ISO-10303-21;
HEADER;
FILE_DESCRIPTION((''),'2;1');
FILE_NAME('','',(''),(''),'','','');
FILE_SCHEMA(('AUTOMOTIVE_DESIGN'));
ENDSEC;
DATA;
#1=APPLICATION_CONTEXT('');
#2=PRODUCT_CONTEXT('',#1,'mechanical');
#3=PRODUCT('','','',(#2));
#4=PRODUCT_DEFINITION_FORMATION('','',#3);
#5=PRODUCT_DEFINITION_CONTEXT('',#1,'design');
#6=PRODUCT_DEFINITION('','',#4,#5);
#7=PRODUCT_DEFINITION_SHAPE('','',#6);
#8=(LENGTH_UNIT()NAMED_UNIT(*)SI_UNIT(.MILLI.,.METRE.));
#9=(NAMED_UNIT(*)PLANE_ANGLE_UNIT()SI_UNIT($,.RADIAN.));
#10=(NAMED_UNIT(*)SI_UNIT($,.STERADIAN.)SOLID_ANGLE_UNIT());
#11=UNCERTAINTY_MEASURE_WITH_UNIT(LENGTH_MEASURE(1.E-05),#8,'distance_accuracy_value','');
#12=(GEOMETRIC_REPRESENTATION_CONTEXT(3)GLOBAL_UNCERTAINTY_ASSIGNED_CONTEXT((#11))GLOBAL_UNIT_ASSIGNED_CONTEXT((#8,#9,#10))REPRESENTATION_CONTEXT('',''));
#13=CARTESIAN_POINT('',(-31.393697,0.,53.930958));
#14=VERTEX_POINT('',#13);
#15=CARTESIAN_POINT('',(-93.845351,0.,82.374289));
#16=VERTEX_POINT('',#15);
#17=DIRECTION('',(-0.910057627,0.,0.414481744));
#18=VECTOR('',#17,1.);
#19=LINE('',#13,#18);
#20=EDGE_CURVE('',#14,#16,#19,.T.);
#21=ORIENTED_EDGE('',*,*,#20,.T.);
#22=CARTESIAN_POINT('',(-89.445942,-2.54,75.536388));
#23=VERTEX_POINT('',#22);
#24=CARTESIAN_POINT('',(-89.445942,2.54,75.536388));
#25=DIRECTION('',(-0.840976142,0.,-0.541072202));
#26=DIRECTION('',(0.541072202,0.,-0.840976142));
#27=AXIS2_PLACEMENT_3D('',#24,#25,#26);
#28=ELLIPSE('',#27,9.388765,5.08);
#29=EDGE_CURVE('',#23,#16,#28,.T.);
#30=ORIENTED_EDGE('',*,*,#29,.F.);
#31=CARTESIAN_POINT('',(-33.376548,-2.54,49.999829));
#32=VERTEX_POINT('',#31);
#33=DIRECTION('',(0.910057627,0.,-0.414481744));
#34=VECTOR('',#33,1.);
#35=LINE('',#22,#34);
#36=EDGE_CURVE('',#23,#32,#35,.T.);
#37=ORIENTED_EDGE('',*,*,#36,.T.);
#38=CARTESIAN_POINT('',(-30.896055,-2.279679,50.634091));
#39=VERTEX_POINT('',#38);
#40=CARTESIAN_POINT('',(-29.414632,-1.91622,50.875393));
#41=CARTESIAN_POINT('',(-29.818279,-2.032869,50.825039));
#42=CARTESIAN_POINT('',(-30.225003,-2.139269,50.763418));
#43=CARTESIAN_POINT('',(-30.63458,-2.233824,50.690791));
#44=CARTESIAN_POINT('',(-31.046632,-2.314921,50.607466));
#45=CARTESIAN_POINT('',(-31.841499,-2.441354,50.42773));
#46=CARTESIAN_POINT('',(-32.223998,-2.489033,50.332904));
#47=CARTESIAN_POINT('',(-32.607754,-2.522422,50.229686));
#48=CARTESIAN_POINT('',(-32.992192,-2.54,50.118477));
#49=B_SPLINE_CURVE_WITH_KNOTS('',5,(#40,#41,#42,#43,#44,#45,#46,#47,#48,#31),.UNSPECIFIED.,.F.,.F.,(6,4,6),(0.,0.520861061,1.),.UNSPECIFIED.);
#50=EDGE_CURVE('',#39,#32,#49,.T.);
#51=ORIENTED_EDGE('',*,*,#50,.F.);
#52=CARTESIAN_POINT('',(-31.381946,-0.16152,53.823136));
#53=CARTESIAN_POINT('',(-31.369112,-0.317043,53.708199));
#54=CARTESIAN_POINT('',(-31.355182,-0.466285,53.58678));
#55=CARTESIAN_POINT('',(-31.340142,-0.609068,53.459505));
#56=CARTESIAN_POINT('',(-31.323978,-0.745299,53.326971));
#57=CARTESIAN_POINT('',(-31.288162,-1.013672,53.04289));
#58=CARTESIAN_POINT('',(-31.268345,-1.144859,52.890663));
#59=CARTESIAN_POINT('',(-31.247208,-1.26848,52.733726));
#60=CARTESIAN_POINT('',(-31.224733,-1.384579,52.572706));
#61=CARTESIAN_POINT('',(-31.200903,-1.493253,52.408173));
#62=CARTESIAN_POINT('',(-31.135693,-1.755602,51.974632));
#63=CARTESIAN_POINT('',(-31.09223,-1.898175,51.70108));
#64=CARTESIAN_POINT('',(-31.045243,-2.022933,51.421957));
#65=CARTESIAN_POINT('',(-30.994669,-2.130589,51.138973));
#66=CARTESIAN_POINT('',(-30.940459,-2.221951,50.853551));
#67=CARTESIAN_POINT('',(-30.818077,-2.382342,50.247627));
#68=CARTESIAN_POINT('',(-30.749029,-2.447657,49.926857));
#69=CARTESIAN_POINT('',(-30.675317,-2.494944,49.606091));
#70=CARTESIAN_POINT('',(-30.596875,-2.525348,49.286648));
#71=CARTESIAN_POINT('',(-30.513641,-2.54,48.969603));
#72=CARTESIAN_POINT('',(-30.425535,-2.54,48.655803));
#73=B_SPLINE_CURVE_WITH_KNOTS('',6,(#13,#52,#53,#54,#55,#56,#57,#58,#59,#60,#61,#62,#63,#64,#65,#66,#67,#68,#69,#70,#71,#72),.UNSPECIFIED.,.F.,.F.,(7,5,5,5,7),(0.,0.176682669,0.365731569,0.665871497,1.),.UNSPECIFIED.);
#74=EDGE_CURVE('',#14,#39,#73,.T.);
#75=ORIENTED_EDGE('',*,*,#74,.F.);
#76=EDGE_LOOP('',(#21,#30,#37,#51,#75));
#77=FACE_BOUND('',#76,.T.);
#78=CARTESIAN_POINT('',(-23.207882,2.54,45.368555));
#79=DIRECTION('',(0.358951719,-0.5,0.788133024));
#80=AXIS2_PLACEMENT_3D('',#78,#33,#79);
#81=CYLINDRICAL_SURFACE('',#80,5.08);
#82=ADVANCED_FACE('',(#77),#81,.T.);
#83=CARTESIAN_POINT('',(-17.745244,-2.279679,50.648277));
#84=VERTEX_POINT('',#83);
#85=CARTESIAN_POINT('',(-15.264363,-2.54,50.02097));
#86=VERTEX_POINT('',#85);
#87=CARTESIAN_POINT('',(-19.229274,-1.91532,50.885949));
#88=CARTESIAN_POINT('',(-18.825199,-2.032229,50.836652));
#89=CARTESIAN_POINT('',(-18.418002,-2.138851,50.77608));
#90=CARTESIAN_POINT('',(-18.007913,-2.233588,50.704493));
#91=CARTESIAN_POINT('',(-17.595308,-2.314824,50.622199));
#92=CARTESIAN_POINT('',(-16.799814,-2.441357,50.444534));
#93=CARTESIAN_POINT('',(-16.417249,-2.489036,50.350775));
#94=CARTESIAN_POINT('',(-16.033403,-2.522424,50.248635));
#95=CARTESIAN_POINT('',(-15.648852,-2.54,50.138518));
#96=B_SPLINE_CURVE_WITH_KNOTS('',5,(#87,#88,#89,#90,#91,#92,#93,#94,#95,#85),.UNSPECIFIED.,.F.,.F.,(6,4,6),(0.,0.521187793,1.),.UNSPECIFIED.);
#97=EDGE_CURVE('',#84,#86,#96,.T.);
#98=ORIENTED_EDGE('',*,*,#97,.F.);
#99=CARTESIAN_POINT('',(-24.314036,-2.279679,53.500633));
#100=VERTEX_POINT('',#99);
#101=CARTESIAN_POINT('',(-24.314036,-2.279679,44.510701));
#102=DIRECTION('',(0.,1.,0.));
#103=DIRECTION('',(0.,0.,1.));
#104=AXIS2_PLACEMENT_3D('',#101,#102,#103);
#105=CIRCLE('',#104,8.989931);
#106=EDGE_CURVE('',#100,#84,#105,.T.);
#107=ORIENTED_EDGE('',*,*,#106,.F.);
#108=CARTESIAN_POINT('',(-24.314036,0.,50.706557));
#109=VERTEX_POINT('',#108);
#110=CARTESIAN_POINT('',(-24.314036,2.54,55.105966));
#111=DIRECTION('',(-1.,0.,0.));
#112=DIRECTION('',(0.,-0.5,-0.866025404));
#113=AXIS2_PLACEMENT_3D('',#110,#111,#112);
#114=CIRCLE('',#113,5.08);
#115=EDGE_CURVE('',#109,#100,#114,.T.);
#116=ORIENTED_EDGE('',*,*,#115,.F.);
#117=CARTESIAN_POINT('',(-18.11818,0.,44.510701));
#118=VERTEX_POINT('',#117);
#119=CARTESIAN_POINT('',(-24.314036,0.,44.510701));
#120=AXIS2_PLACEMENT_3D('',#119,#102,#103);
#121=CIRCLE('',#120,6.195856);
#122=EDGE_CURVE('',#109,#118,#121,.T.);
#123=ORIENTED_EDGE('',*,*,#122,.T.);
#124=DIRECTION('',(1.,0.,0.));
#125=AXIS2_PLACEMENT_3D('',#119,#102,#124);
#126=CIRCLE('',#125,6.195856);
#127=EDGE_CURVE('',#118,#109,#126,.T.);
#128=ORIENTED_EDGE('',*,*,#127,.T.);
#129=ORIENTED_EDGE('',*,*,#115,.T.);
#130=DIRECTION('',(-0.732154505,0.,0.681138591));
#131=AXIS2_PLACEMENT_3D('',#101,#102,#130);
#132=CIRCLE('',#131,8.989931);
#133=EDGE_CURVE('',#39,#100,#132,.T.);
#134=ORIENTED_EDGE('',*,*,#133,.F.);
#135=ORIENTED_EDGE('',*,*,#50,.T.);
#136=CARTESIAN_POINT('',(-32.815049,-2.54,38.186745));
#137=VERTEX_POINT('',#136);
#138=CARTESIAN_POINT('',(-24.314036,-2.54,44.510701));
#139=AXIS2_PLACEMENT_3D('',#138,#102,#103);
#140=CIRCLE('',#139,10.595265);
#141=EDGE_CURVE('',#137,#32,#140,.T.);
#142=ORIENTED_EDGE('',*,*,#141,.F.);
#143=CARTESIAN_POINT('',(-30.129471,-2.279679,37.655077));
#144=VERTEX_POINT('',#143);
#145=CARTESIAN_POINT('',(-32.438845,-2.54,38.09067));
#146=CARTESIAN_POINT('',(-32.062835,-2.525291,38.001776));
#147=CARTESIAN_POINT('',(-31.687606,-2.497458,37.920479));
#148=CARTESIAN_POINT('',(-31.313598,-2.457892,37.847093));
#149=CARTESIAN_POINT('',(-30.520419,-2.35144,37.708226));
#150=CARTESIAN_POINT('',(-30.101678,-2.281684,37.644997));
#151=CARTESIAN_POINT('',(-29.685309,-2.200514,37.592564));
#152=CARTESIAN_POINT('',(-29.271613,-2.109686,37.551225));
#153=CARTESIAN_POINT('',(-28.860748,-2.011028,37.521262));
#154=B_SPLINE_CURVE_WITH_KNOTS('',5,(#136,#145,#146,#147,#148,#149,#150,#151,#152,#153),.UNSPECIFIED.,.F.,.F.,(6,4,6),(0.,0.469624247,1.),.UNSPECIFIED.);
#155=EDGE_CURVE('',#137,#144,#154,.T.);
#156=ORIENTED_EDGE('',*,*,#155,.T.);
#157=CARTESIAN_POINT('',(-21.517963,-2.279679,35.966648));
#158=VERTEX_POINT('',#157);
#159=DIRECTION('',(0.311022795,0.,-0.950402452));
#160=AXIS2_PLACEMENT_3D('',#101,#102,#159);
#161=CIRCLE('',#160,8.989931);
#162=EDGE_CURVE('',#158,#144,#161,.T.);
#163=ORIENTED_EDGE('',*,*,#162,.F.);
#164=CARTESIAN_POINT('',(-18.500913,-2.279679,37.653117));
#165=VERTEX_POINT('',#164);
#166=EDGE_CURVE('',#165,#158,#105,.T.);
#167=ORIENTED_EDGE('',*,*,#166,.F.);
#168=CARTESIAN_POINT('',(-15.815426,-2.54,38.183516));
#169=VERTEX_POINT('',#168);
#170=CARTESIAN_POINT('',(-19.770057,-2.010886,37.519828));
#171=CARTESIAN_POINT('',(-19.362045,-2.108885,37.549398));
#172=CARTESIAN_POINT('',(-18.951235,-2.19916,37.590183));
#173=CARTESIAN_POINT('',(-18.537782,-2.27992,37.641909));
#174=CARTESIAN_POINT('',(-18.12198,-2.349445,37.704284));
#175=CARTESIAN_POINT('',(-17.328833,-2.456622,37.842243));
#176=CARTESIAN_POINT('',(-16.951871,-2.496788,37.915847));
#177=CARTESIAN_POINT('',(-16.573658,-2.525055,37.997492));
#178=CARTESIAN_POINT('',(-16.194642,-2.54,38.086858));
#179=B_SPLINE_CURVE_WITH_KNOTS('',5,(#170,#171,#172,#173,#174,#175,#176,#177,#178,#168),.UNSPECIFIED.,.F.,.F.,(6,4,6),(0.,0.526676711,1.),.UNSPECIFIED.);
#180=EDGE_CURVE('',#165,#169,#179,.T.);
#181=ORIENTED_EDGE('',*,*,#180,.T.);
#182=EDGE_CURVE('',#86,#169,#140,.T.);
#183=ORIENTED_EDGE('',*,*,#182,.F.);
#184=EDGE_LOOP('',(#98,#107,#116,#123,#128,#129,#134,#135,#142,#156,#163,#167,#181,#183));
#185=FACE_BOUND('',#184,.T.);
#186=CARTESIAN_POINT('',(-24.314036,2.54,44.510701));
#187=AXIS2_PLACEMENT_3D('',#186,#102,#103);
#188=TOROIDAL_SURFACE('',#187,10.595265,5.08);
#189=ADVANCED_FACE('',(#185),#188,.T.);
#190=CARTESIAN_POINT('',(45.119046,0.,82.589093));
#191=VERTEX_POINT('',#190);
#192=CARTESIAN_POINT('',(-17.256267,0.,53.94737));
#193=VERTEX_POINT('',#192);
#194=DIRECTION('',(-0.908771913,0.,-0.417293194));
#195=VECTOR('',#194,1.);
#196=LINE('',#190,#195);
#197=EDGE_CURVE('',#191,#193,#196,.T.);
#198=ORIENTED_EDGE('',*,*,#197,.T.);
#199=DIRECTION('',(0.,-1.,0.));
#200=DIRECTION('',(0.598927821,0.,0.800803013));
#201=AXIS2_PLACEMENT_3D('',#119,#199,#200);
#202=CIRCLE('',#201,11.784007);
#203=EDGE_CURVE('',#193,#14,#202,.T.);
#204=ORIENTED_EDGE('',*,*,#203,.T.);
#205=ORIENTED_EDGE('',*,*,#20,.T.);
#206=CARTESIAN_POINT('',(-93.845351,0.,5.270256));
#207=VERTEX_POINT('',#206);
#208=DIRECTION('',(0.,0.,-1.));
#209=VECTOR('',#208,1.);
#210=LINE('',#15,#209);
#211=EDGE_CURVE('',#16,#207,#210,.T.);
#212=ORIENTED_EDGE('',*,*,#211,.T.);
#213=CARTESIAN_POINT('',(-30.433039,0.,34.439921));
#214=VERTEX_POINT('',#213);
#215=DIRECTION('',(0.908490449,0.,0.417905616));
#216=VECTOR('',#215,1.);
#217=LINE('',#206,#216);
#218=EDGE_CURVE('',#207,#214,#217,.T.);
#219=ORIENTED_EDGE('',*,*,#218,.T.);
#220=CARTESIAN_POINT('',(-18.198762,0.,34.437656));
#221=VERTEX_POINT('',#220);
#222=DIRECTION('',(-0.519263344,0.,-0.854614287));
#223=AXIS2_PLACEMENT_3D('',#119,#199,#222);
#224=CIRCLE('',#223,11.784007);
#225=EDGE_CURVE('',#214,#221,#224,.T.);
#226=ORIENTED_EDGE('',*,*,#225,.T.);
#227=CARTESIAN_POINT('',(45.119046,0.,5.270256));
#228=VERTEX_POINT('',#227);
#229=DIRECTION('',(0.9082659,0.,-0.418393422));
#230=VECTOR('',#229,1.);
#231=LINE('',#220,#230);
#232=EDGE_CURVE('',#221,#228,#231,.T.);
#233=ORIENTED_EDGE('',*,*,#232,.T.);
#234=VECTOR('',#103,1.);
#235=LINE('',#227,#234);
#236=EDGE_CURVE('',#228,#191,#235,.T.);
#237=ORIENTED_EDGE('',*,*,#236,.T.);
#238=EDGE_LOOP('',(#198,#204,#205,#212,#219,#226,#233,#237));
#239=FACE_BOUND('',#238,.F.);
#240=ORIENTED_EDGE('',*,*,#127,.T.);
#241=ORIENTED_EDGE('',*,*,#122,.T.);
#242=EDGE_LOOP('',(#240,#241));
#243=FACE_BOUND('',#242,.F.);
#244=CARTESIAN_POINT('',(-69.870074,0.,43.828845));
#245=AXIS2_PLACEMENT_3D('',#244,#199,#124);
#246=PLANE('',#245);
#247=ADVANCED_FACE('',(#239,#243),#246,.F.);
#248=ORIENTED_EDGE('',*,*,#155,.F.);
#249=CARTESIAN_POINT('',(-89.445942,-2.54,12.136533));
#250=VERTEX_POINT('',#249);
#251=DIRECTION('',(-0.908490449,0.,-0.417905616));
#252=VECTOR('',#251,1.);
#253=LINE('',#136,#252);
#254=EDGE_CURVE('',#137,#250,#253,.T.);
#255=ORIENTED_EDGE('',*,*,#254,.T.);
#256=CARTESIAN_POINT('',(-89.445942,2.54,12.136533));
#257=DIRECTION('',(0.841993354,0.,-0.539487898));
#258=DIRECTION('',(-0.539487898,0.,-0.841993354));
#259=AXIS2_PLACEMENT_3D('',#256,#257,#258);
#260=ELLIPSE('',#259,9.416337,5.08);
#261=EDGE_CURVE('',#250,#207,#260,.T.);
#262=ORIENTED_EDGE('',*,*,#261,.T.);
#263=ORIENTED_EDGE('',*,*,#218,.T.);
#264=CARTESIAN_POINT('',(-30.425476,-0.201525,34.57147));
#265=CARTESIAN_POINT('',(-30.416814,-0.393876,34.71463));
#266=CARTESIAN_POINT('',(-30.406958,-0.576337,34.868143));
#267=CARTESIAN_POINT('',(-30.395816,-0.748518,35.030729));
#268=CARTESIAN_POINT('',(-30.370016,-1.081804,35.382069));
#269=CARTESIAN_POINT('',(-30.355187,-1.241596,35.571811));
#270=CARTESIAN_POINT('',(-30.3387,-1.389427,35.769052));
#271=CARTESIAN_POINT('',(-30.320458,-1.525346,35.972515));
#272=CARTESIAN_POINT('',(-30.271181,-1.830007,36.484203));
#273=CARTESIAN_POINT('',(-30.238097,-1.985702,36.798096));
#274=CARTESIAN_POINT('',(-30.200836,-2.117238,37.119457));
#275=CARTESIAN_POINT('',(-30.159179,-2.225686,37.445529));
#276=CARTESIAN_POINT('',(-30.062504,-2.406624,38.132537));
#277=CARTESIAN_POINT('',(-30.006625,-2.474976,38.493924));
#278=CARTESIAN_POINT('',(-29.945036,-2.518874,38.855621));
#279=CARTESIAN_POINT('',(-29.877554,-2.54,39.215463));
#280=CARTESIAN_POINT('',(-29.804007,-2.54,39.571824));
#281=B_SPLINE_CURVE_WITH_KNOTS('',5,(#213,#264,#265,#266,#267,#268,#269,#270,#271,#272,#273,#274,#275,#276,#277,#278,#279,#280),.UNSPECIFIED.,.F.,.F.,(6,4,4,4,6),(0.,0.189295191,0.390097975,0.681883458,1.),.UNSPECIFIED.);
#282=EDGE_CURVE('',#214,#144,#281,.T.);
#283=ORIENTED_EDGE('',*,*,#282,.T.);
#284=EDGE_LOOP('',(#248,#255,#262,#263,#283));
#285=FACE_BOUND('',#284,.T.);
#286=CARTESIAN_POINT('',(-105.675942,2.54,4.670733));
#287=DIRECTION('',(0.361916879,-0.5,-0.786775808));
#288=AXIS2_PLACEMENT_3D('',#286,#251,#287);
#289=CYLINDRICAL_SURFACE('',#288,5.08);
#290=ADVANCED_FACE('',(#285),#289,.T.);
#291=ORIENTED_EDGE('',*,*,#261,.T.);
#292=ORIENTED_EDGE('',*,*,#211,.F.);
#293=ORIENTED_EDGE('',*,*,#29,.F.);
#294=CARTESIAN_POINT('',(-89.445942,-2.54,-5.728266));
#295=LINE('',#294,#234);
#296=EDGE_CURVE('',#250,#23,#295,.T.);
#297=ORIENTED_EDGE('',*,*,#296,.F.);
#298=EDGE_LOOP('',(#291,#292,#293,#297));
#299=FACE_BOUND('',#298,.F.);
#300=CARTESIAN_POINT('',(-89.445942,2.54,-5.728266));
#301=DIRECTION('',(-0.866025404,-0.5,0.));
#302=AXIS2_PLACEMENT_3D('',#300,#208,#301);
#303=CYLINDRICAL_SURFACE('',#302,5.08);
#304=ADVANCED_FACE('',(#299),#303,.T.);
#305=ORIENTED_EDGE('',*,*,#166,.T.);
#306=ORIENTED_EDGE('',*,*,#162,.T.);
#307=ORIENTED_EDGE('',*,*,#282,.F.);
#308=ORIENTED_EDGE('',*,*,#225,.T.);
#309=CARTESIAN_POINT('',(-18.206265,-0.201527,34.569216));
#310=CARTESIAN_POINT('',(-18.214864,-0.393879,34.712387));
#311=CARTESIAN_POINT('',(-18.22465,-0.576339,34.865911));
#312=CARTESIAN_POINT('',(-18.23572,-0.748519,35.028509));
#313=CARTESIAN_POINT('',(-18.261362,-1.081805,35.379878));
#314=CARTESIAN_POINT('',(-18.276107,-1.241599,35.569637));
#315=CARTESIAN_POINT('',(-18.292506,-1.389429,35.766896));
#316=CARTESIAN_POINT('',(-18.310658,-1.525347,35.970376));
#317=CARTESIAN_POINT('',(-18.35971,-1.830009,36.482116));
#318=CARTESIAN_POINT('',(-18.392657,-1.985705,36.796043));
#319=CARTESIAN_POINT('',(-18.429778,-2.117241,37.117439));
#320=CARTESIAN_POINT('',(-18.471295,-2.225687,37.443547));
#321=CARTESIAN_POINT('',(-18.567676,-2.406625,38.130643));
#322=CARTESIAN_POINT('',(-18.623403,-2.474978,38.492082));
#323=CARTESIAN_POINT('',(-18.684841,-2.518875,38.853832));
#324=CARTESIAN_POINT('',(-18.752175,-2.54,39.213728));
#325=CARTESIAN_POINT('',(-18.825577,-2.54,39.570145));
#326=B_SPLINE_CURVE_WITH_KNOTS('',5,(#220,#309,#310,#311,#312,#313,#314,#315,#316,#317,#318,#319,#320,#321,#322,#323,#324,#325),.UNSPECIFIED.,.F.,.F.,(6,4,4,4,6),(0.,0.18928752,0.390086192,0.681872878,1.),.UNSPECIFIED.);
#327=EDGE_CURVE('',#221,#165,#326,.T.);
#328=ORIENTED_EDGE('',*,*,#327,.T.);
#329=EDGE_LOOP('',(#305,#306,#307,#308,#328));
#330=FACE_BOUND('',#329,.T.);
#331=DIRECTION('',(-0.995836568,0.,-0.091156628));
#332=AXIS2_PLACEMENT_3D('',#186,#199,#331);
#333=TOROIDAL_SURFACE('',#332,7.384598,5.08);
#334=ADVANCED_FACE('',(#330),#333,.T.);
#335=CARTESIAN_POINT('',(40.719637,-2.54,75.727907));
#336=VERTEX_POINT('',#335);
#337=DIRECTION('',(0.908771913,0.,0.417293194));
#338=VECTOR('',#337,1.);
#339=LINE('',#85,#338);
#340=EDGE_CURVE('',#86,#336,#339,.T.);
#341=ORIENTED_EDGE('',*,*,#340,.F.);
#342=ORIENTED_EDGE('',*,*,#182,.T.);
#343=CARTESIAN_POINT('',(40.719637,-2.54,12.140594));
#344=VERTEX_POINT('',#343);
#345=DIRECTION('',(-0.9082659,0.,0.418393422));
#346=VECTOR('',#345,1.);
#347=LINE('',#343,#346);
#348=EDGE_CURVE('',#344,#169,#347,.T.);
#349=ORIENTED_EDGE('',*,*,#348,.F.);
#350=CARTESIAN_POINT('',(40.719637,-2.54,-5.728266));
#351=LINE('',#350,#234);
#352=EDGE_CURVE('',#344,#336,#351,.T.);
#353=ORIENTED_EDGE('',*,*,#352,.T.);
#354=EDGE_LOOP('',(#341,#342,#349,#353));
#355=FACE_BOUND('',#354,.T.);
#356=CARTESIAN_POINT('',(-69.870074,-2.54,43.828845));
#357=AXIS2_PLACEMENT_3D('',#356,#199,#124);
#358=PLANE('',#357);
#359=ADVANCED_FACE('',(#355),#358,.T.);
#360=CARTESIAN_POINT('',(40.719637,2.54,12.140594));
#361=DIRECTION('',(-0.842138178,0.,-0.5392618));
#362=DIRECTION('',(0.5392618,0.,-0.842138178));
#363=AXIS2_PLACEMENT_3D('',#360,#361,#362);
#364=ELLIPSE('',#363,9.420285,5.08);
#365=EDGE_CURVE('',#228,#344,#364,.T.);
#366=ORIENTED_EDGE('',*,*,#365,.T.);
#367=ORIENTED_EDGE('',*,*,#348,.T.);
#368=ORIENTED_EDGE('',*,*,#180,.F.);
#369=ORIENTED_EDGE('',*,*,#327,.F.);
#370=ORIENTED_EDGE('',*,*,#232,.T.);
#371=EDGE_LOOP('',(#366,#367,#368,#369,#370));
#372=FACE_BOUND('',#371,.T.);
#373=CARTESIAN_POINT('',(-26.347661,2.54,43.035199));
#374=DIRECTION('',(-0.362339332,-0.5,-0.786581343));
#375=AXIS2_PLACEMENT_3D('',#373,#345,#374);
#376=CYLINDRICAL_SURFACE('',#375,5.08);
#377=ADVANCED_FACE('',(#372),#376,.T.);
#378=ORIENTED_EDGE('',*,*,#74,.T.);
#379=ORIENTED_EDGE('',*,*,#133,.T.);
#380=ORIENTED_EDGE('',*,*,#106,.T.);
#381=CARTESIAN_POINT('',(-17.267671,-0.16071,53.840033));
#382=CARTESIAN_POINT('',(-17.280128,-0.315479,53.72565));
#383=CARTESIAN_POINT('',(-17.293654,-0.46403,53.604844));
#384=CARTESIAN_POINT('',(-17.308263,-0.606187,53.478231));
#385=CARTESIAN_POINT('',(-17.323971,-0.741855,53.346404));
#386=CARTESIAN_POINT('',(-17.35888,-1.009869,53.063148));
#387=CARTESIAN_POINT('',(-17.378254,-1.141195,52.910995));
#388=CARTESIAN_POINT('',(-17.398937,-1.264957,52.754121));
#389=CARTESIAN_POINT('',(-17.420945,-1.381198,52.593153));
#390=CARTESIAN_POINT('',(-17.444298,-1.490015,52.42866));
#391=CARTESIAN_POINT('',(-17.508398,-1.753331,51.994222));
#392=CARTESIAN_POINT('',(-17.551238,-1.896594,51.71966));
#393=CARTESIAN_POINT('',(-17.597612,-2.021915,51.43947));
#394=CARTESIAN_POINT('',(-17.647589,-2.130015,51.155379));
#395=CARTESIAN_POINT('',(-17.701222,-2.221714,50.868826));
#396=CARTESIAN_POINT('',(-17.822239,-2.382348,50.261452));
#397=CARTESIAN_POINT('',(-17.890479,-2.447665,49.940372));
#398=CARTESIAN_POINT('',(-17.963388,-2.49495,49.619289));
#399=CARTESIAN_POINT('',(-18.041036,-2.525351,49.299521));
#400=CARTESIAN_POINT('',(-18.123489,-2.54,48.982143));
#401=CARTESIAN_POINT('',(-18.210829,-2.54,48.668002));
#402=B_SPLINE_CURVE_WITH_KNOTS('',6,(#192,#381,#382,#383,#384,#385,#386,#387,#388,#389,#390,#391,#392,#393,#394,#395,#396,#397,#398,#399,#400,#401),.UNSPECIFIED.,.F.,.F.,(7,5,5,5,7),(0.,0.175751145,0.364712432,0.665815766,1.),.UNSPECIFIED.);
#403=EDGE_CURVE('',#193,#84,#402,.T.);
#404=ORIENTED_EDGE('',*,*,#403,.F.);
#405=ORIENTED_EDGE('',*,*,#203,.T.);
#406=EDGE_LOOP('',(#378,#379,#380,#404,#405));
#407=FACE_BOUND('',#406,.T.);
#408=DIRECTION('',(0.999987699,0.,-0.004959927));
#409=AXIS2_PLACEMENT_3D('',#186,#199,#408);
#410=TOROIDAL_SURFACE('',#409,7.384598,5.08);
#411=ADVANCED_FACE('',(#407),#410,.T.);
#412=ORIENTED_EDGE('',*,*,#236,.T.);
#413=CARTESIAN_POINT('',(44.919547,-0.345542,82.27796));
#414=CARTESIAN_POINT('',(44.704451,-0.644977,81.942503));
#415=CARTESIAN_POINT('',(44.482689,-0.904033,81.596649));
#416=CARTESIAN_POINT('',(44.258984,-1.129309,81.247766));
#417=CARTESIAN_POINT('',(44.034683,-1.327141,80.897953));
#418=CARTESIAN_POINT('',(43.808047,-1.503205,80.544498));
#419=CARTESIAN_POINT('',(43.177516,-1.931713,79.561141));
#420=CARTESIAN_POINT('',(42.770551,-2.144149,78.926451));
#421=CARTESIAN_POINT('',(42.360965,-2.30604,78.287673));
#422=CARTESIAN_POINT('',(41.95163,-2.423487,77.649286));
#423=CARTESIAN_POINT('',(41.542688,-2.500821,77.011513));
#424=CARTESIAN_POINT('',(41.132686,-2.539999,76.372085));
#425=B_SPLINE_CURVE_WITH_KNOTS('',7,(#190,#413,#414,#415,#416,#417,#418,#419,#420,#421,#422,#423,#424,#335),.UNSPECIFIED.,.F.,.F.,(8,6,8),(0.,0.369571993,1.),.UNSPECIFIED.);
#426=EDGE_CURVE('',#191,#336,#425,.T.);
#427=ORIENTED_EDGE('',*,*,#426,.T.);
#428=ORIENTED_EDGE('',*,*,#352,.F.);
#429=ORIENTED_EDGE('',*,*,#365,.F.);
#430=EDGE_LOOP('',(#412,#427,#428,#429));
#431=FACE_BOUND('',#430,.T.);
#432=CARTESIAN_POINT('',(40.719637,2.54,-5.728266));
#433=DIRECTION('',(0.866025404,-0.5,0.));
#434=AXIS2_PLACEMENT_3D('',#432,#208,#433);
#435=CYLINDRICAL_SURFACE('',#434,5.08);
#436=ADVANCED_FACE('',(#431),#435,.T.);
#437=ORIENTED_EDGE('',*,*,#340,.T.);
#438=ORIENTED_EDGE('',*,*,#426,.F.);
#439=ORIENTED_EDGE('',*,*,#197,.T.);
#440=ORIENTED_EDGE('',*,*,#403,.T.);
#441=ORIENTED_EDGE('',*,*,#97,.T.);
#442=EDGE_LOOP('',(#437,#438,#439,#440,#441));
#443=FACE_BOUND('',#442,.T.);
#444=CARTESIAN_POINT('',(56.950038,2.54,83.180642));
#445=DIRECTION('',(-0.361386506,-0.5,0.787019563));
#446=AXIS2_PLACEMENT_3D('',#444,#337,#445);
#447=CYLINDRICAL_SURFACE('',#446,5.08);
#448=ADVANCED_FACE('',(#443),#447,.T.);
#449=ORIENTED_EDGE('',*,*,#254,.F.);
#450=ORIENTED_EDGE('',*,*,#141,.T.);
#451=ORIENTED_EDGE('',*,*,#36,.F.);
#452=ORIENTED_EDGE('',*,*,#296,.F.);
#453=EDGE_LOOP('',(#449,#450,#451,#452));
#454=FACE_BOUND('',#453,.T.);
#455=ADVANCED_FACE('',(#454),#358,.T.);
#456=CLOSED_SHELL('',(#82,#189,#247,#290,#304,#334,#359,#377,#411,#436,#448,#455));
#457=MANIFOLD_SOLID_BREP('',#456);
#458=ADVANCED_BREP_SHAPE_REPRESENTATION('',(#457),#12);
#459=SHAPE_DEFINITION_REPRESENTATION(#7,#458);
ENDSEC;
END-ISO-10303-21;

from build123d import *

# Parameters (mm, degrees)
F1_DEPTH     = 2.54
F2_T1_DEPTH  = 99.1010776341
F2_T3_DEPTH  = 99.3158813996
F2_T8_DEPTH  = 90.6208911446
F2_S9_R      = 11.7840069811
F2_T10_DEPTH = 49
F2_T14_DEPTH = 91.7966915257
F2_S15_R     = 11.7840069811
F2_T16_DEPTH = 49
F2_T20_ANGLE = 169.5184876271
F2_T26_ANGLE = 180.7013968541
F2_T32_DEPTH = 90.6339735213
F2_S33_R     = 11.7840069811
F2_T34_DEPTH = 49
F2_T38_DEPTH = 91.7098992775
F2_S39_R     = 11.7840069811
F2_T40_DEPTH = 49
F2_T47_DEPTH = 90.6208911446
F2_S48_R     = 11.7840069811
F2_T49_DEPTH = 49
F2_T52_ANGLE = 180.7013968541
F2_T60_DEPTH = 91.7966915257
F2_S61_R     = 11.7840069811
F2_T62_DEPTH = 49
F2_T65_ANGLE = 169.5184876271
F2_T73_ANGLE = 169.5184876271
F2_T78_DEPTH = 91.7098992775
F2_S79_R     = 11.7840069811
F2_T80_DEPTH = 49
F2_T86_DEPTH = 90.6339735213
F2_S87_R     = 11.7840069811
F2_T88_DEPTH = 49
F2_T91_ANGLE = 180.7013968541


# Not quite as in the source:
# - a fillet or chamfer that OpenCascade refuses, or shapes differently, is made with other operations: its cross-section is extruded or revolved along the edge and cut away or added


with BuildPart() as f1:
    # F0 (on Front) → F1 (new body)
    with BuildSketch(Plane.XZ):
        with BuildLine():
            Line((-31.3936966788, 53.9309575686), (-93.8453510125, 82.3742888697))
            Line((-93.8453510125, 82.3742888697), (-93.8453510125, 5.2702564917))
            Line((-93.8453510125, 5.2702564917), (-30.4330390113, 34.4399206311))
            ThreePointArc((-30.4330390113, 34.4399206311), (-36.0837561517, 43.9306053941), (-31.3936966788, 53.9309575686))
        make_face()
        with BuildLine():
            Line((-24.3140361377, 37.2546620127), (-30.4330390113, 34.4399206311))
            ThreePointArc((-30.4330390113, 34.4399206311), (-24.3162174043, 32.7266945746), (-18.1987619666, 34.4376560178))
            Line((-18.1987619666, 34.4376560178), (-24.3140361377, 37.2546620127))
        make_face()
        with BuildLine():
            ThreePointArc((-17.2562665131, 53.9473696458), (-24.3277161277, 56.2947003943), (-31.3936966788, 53.9309575686))
            Line((-31.3936966788, 53.9309575686), (-24.3140361377, 50.7065573118))
            Line((-24.3140361377, 50.7065573118), (-17.2562665131, 53.9473696458))
        make_face()
        with BuildLine():
            Line((-24.3140361377, 50.7065573118), (-31.3936966788, 53.9309575686))
            ThreePointArc((-31.3936966788, 53.9309575686), (-36.0837561517, 43.9306053941), (-30.4330390113, 34.4399206311))
            Line((-30.4330390113, 34.4399206311), (-24.3140361377, 37.2546620127))
            Line((-24.3140361377, 37.2546620127), (-18.1987619666, 34.4376560178))
            ThreePointArc((-18.1987619666, 34.4376560178), (-14.0445362947, 38.731411302), (-12.5300291567, 44.5107013538))
            ThreePointArc((-12.5300291567, 44.5107013538), (-13.7776319348, 49.7877276945), (-17.2562665131, 53.9473696458))
            Line((-17.2562665131, 53.9473696458), (-24.3140361377, 50.7065573118))
        make_face()
        with BuildLine():
            ThreePointArc((-18.1181801797, 44.5107013538), (-28.6951679009, 40.1295695906), (-24.3140361377, 50.7065573118))
            ThreePointArc((-24.3140361377, 50.7065573118), (-19.9329043745, 48.891833117), (-18.1181801797, 44.5107013538))
        make_face(mode=Mode.SUBTRACT)
        with BuildLine():
            Line((45.1190461185, 82.5890926352), (-17.2562665131, 53.9473696458))
            ThreePointArc((-17.2562665131, 53.9473696458), (-13.7776319348, 49.7877276945), (-12.5300291567, 44.5107013538))
            ThreePointArc((-12.5300291567, 44.5107013538), (-14.0445362947, 38.731411302), (-18.1987619666, 34.4376560178))
            Line((-18.1987619666, 34.4376560178), (45.1190461185, 5.2702564917))
            Line((45.1190461185, 5.2702564917), (45.1190461185, 82.5890926352))
        make_face()
    extrude(amount=F1_DEPTH)

    # F2: fillet of radius 5.08 on 9 edges, made by hand

    # F2_s2 → F2_t1 (cut)
    with BuildSketch(Plane.XY.offset(-5.7282661364)):
        with BuildLine():
            ThreePointArc((-93.8453510125, 0), (-91.9859419613, -1.8594090512), (-89.4459419613, -2.54))
            Line((-89.4459419613, -2.54), (-89.4459419613, -2.6416))
            Line((-89.4459419613, -2.6416), (-93.8453510125, -2.6416))
            Line((-93.8453510125, -2.6416), (-93.9469510125, -2.54))
            ThreePointArc((-93.9469510125, -2.54), (-93.9469510125, -1.27), (-93.9333391936, -0.0508))
            Line((-93.9333391936, -0.0508), (-93.8453510125, 0))
        make_face()
    extrude(amount=F2_T1_DEPTH, mode=Mode.SUBTRACT)

    # F2_s4 → F2_t3 (cut)
    with BuildSketch(Plane.XY.offset(-5.7282661364)):
        with BuildLine():
            ThreePointArc((45.1190461184, 0), (43.2596370672, -1.8594090512), (40.7196370672, -2.54))
            Line((40.7196370672, -2.54), (40.7196370672, -2.6416))
            Line((40.7196370672, -2.6416), (45.1190461185, -2.6416))
            Line((45.1190461185, -2.6416), (45.2206461185, -2.54))
            ThreePointArc((45.2206461185, -2.54), (45.2206461185, -1.27), (45.2070342995, -0.0508))
            Line((45.2070342995, -0.0508), (45.1190461184, 0))
        make_face()
    extrude(amount=F2_T3_DEPTH, mode=Mode.SUBTRACT)


with BuildPart() as f2_tool6:
    # F2_s7 → F2_t8 (new body)
    with BuildSketch(Plane(origin=(-36.3340032464, 0, 16.54816198), x_dir=(0, 1, 0), z_dir=(-0.9100576268, 0, 0.4144817437))):
        with BuildLine():
            ThreePointArc((0, -36.0681651183), (-1.8594090512, -34.2087560671), (-2.54, -31.6687560671))
            Line((-2.54, -31.6687560671), (-2.6416, -31.6687560671))
            Line((-2.6416, -31.6687560671), (-2.6416, -36.0681651183))
            Line((-2.6416, -36.0681651183), (-2.54, -36.1697651183))
            ThreePointArc((-2.54, -36.1697651183), (-1.27, -36.1697651183), (-0.0508, -36.1561532993))
            Line((-0.0508, -36.1561532993), (0, -36.0681651183))
        make_face()
    extrude(amount=F2_T8_DEPTH)

    # F2_s9 → F2_t10 (cut, symmetric)
    with BuildSketch(Plane.XZ.offset(1.3)):
        with Locations((-24.3140361377, 44.5107013538)):
            Circle(F2_S9_R)
    extrude(amount=F2_T10_DEPTH, both=True, mode=Mode.SUBTRACT)


with BuildPart() as f1_1:
    add(f1.part)

    # F2_t5: cut F2_tool6
    add(f2_tool6.part, mode=Mode.SUBTRACT)


with BuildPart() as f2_tool12:
    # F2_s13 → F2_t14 (new body)
    with BuildSketch(Plane(origin=(-85.4468499724, 0, -39.3055518212), x_dir=(0, 1, 0), z_dir=(0.9084904493, 0, 0.4179056155))):
        with BuildLine():
            ThreePointArc((0, 44.0064768695), (-1.8594090512, 45.8658859207), (-2.54, 48.4058859207))
            Line((-2.54, 48.4058859207), (-2.6416, 48.4058859207))
            Line((-2.6416, 48.4058859207), (-2.6416, 44.0064768695))
            Line((-2.6416, 44.0064768695), (-2.54, 43.9048768695))
            ThreePointArc((-2.54, 43.9048768695), (-1.27, 43.9048768695), (-0.0508, 43.9184886885))
            Line((-0.0508, 43.9184886885), (0, 44.0064768695))
        make_face()
    extrude(amount=F2_T14_DEPTH)

    # F2_s15 → F2_t16 (cut, symmetric)
    with BuildSketch(Plane.XZ.offset(1.3)):
        with Locations((-24.3140361377, 44.5107013538)):
            Circle(F2_S15_R)
    extrude(amount=F2_T16_DEPTH, both=True, mode=Mode.SUBTRACT)


with BuildPart() as f1_2:
    add(f1_1.part)

    # F2_t11: cut F2_tool12
    add(f2_tool12.part, mode=Mode.SUBTRACT)


with BuildPart() as f2_tool18:
    # F2_s19 → F2_t20 (revolve)
    with BuildSketch(Plane(origin=(-4.2425907564, 0, 46.3479960774), x_dir=(0, 1, 0), z_dir=(-0.0911566276, 0, 0.9958365675))):
        with BuildLine():
            ThreePointArc((0, 31.939367846), (-1.8594090512, 30.0799587948), (-2.54, 27.5399587948))
            Line((-2.54, 27.5399587948), (-2.6416, 27.5399587948))
            Line((-2.6416, 27.5399587948), (-2.6416, 31.939367846))
            Line((-2.6416, 31.939367846), (-2.54, 32.040967846))
            ThreePointArc((-2.54, 32.040967846), (-1.27, 32.040967846), (-0.0508, 32.027356027))
            Line((-0.0508, 32.027356027), (0, 31.939367846))
        make_face()
    revolve(axis=Axis((-24.3140361377, -2.54, 44.5107013538), (0, -1, 0)), revolution_arc=F2_T20_ANGLE)

    split(bisect_by=Plane(origin=(-18.3905538043, 0, 39.9794639438), x_dir=(0, 1, 0), z_dir=(0.4179056155, 0, -0.9084904493)), keep=Keep.TOP)

    split(bisect_by=Plane(origin=(9.9009901007, 0, 21.4934824919), x_dir=(0, 1, 0), z_dir=(-0.4183934216, 0, -0.9082658998)), keep=Keep.TOP)


with BuildPart() as f1_3:
    add(f1_2.part)

    # F2_t17: cut F2_tool18
    add(f2_tool18.part, mode=Mode.SUBTRACT)


with BuildPart() as f2_tool24:
    # F2_s25 → F2_t26 (revolve)
    with BuildSketch(Plane(origin=(0.2201689694, 0, 44.3890119894), x_dir=(0, 1, 0), z_dir=(-0.004959927, 0, -0.9999876995))):
        with BuildLine():
            ThreePointArc((0, -12.7504999131), (-1.8594090512, -14.6099089643), (-2.54, -17.1499089643))
            Line((-2.54, -17.1499089643), (-2.6416, -17.1499089643))
            Line((-2.6416, -17.1499089643), (-2.6416, -12.7504999131))
            Line((-2.6416, -12.7504999131), (-2.54, -12.6488999131))
            ThreePointArc((-2.54, -12.6488999131), (-1.27, -12.6488999131), (-0.0508, -12.6625117321))
            Line((-0.0508, -12.6625117321), (0, -12.7504999131))
        make_face()
    revolve(axis=Axis((-24.3140361377, -2.54, 44.5107013538), (0, -1, 0)), revolution_arc=F2_T26_ANGLE)

    split(bisect_by=Plane(origin=(14.9495959692, 0, 32.824108752), x_dir=(0, 1, 0), z_dir=(0.4144817437, 0, 0.9100576268)), keep=Keep.TOP)

    split(bisect_by=Plane(origin=(-23.4630512937, 0, 51.0973156286), x_dir=(0, 1, 0), z_dir=(-0.4172931935, 0, 0.9087719134)), keep=Keep.TOP)


with BuildPart() as f1_4:
    add(f1_3.part)

    # F2_t23: cut F2_tool24
    add(f2_tool24.part, mode=Mode.SUBTRACT)


with BuildPart() as f2_tool30:
    # F2_s31 → F2_t32 (new body)
    with BuildSketch(Plane(origin=(78.5772458658, 0, 36.0813856381), x_dir=(0, 1, 0), z_dir=(-0.9087719134, 0, -0.4172931935))):
        with BuildLine():
            ThreePointArc((0, -56.2267768991), (-1.8594090512, -54.3673678478), (-2.54, -51.8273678478))
            Line((-2.54, -51.8273678478), (-2.6416, -51.8273678478))
            Line((-2.6416, -51.8273678478), (-2.6416, -56.2267768991))
            Line((-2.6416, -56.2267768991), (-2.54, -56.3283768991))
            ThreePointArc((-2.54, -56.3283768991), (-1.27, -56.3283768991), (-0.0508, -56.3147650801))
            Line((-0.0508, -56.3147650801), (0, -56.2267768991))
        make_face()
    extrude(amount=F2_T32_DEPTH)

    # F2_s33 → F2_t34 (cut, symmetric)
    with BuildSketch(Plane.XZ.offset(1.3)):
        with Locations((-24.3140361377, 44.5107013538)):
            Circle(F2_S33_R)
    extrude(amount=F2_T34_DEPTH, both=True, mode=Mode.SUBTRACT)


with BuildPart() as f1_5:
    add(f1_4.part)

    # F2_t29: cut F2_tool30
    add(f2_tool30.part, mode=Mode.SUBTRACT)


with BuildPart() as f2_tool36:
    # F2_s37 → F2_t38 (new body)
    with BuildSketch(Plane(origin=(-38.0893351185, 0, 17.5458830412), x_dir=(0, 1, 0), z_dir=(0.9082658998, 0, -0.4183934216))):
        with BuildLine():
            ThreePointArc((0, 23.6643063411), (-1.8594090512, 25.5237153923), (-2.54, 28.0637153923))
            Line((-2.54, 28.0637153923), (-2.6416, 28.0637153923))
            Line((-2.6416, 28.0637153923), (-2.6416, 23.6643063411))
            Line((-2.6416, 23.6643063411), (-2.54, 23.5627063411))
            ThreePointArc((-2.54, 23.5627063411), (-1.27, 23.5627063411), (-0.0508, 23.57631816))
            Line((-0.0508, 23.57631816), (0, 23.6643063411))
        make_face()
    extrude(amount=F2_T38_DEPTH)

    # F2_s39 → F2_t40 (cut, symmetric)
    with BuildSketch(Plane.XZ.offset(1.3)):
        with Locations((-24.3140361377, 44.5107013538)):
            Circle(F2_S39_R)
    extrude(amount=F2_T40_DEPTH, both=True, mode=Mode.SUBTRACT)


with BuildPart() as f1_6:
    add(f1_5.part)

    # F2_t35: cut F2_tool36
    add(f2_tool36.part, mode=Mode.SUBTRACT)

    # F2_s41 → F2_t42 (revolve, cut)
    with BuildSketch(Plane.YZ.offset(-24.3140361377)):
        with BuildLine():
            ThreePointArc((0, 50.7065573118), (-1.8594090512, 52.565966363), (-2.54, 55.105966363))
            Line((-2.54, 55.105966363), (-2.6416, 55.105966363))
            Line((-2.6416, 55.105966363), (-2.6416, 50.7065573118))
            Line((-2.6416, 50.7065573118), (-2.54, 50.6049573118))
            ThreePointArc((-2.54, 50.6049573118), (-1.27, 50.6049573118), (-0.0508, 50.6185691308))
            Line((-0.0508, 50.6185691308), (0, 50.7065573118))
        make_face()
    revolve(axis=Axis((-24.3140361377, -2.54, 44.5107013538), (0, 1, 0)), mode=Mode.SUBTRACT)


with BuildPart() as f2_tool45:
    # F2_s46 → F2_t47 (new body)
    with BuildSketch(Plane(origin=(-36.3340032464, 0, 16.54816198), x_dir=(0, 1, 0), z_dir=(-0.9100576268, 0, 0.4144817437))):
        with BuildLine():
            ThreePointArc((0, -36.0681651183), (-1.8594090512, -34.2087560671), (-2.54, -31.6687560671))
            Line((-2.54, -31.6687560671), (-2.6416, -31.6687560671))
            Line((-2.6416, -31.6687560671), (-2.6416, -36.0681651183))
            Line((-2.6416, -36.0681651183), (-2.54, -36.1697651183))
            ThreePointArc((-2.54, -36.1697651183), (-1.27, -36.1697651183), (-0.0508, -36.1561532993))
            Line((-0.0508, -36.1561532993), (0, -36.0681651183))
        make_face()
    extrude(amount=F2_T47_DEPTH)

    # F2_s48 → F2_t49 (intersect, symmetric)
    with BuildSketch(Plane.XZ.offset(1.3)):
        with Locations((-24.3140361377, 44.5107013538)):
            Circle(F2_S48_R)
    extrude(amount=F2_T49_DEPTH, both=True, mode=Mode.INTERSECT)


with BuildPart() as f2_tool50:
    # F2_s51 → F2_t52 (revolve)
    with BuildSketch(Plane(origin=(0.2201689694, 0, 44.3890119894), x_dir=(0, 1, 0), z_dir=(-0.004959927, 0, -0.9999876995))):
        with BuildLine():
            ThreePointArc((0, -12.7504999131), (-1.8594090512, -14.6099089643), (-2.54, -17.1499089643))
            Line((-2.54, -17.1499089643), (-2.6416, -17.1499089643))
            Line((-2.6416, -17.1499089643), (-2.6416, -12.7504999131))
            Line((-2.6416, -12.7504999131), (-2.54, -12.6488999131))
            ThreePointArc((-2.54, -12.6488999131), (-1.27, -12.6488999131), (-0.0508, -12.6625117321))
            Line((-0.0508, -12.6625117321), (0, -12.7504999131))
        make_face()
    revolve(axis=Axis((-24.3140361377, -2.54, 44.5107013538), (0, -1, 0)), revolution_arc=F2_T52_ANGLE)

    split(bisect_by=Plane(origin=(14.9495959692, 0, 32.824108752), x_dir=(0, 1, 0), z_dir=(-0.4144817437, 0, -0.9100576268)), keep=Keep.TOP)

    split(bisect_by=Plane(origin=(-23.4630512937, 0, 51.0973156286), x_dir=(0, 1, 0), z_dir=(-0.4172931935, 0, 0.9087719134)), keep=Keep.TOP)


with BuildPart() as f2_tool45_1:
    add(f2_tool45.part)

    # F2_t55: intersect F2_tool50
    add(f2_tool50.part, mode=Mode.INTERSECT)


with BuildPart() as f1_7:
    add(f1_6.part)

    # F2_t43: cut F2_tool45
    add(f2_tool45_1.part, mode=Mode.SUBTRACT)


with BuildPart() as f2_tool58:
    # F2_s59 → F2_t60 (new body)
    with BuildSketch(Plane(origin=(-85.4468499724, 0, -39.3055518212), x_dir=(0, 1, 0), z_dir=(0.9084904493, 0, 0.4179056155))):
        with BuildLine():
            ThreePointArc((0, 44.0064768695), (-1.8594090512, 45.8658859207), (-2.54, 48.4058859207))
            Line((-2.54, 48.4058859207), (-2.6416, 48.4058859207))
            Line((-2.6416, 48.4058859207), (-2.6416, 44.0064768695))
            Line((-2.6416, 44.0064768695), (-2.54, 43.9048768695))
            ThreePointArc((-2.54, 43.9048768695), (-1.27, 43.9048768695), (-0.0508, 43.9184886885))
            Line((-0.0508, 43.9184886885), (0, 44.0064768695))
        make_face()
    extrude(amount=F2_T60_DEPTH)

    # F2_s61 → F2_t62 (intersect, symmetric)
    with BuildSketch(Plane.XZ.offset(1.3)):
        with Locations((-24.3140361377, 44.5107013538)):
            Circle(F2_S61_R)
    extrude(amount=F2_T62_DEPTH, both=True, mode=Mode.INTERSECT)


with BuildPart() as f2_tool63:
    # F2_s64 → F2_t65 (revolve)
    with BuildSketch(Plane(origin=(-4.2425907564, 0, 46.3479960774), x_dir=(0, 1, 0), z_dir=(-0.0911566276, 0, 0.9958365675))):
        with BuildLine():
            ThreePointArc((0, 31.939367846), (-1.8594090512, 30.0799587948), (-2.54, 27.5399587948))
            Line((-2.54, 27.5399587948), (-2.6416, 27.5399587948))
            Line((-2.6416, 27.5399587948), (-2.6416, 31.939367846))
            Line((-2.6416, 31.939367846), (-2.54, 32.040967846))
            ThreePointArc((-2.54, 32.040967846), (-1.27, 32.040967846), (-0.0508, 32.027356027))
            Line((-0.0508, 32.027356027), (0, 31.939367846))
        make_face()
    revolve(axis=Axis((-24.3140361377, -2.54, 44.5107013538), (0, -1, 0)), revolution_arc=F2_T65_ANGLE)

    split(bisect_by=Plane(origin=(-18.3905538043, 0, 39.9794639438), x_dir=(0, 1, 0), z_dir=(-0.4179056155, 0, 0.9084904493)), keep=Keep.TOP)

    split(bisect_by=Plane(origin=(9.9009901007, 0, 21.4934824919), x_dir=(0, 1, 0), z_dir=(-0.4183934216, 0, -0.9082658998)), keep=Keep.TOP)


with BuildPart() as f2_tool58_1:
    add(f2_tool58.part)

    # F2_t68: intersect F2_tool63
    add(f2_tool63.part, mode=Mode.INTERSECT)


with BuildPart() as f1_8:
    add(f1_7.part)

    # F2_t56: cut F2_tool58
    add(f2_tool58_1.part, mode=Mode.SUBTRACT)


with BuildPart() as f2_tool71:
    # F2_s72 → F2_t73 (revolve)
    with BuildSketch(Plane(origin=(-4.2425907564, 0, 46.3479960774), x_dir=(0, 1, 0), z_dir=(-0.0911566276, 0, 0.9958365675))):
        with BuildLine():
            ThreePointArc((0, 31.939367846), (-1.8594090512, 30.0799587948), (-2.54, 27.5399587948))
            Line((-2.54, 27.5399587948), (-2.6416, 27.5399587948))
            Line((-2.6416, 27.5399587948), (-2.6416, 31.939367846))
            Line((-2.6416, 31.939367846), (-2.54, 32.040967846))
            ThreePointArc((-2.54, 32.040967846), (-1.27, 32.040967846), (-0.0508, 32.027356027))
            Line((-0.0508, 32.027356027), (0, 31.939367846))
        make_face()
    revolve(axis=Axis((-24.3140361377, -2.54, 44.5107013538), (0, -1, 0)), revolution_arc=F2_T73_ANGLE)

    split(bisect_by=Plane(origin=(-18.3905538043, 0, 39.9794639438), x_dir=(0, 1, 0), z_dir=(0.4179056155, 0, -0.9084904493)), keep=Keep.TOP)

    split(bisect_by=Plane(origin=(9.9009901007, 0, 21.4934824919), x_dir=(0, 1, 0), z_dir=(0.4183934216, 0, 0.9082658998)), keep=Keep.TOP)


with BuildPart() as f2_tool76:
    # F2_s77 → F2_t78 (new body)
    with BuildSketch(Plane(origin=(-38.0893351185, 0, 17.5458830412), x_dir=(0, 1, 0), z_dir=(0.9082658998, 0, -0.4183934216))):
        with BuildLine():
            ThreePointArc((0, 23.6643063411), (-1.8594090512, 25.5237153923), (-2.54, 28.0637153923))
            Line((-2.54, 28.0637153923), (-2.6416, 28.0637153923))
            Line((-2.6416, 28.0637153923), (-2.6416, 23.6643063411))
            Line((-2.6416, 23.6643063411), (-2.54, 23.5627063411))
            ThreePointArc((-2.54, 23.5627063411), (-1.27, 23.5627063411), (-0.0508, 23.57631816))
            Line((-0.0508, 23.57631816), (0, 23.6643063411))
        make_face()
    extrude(amount=F2_T78_DEPTH)

    # F2_s79 → F2_t80 (intersect, symmetric)
    with BuildSketch(Plane.XZ.offset(1.3)):
        with Locations((-24.3140361377, 44.5107013538)):
            Circle(F2_S79_R)
    extrude(amount=F2_T80_DEPTH, both=True, mode=Mode.INTERSECT)


with BuildPart() as f2_tool71_1:
    add(f2_tool71.part)

    # F2_t81: intersect F2_tool76
    add(f2_tool76.part, mode=Mode.INTERSECT)


with BuildPart() as f1_9:
    add(f1_8.part)

    # F2_t69: cut F2_tool71
    add(f2_tool71_1.part, mode=Mode.SUBTRACT)


with BuildPart() as f2_tool84:
    # F2_s85 → F2_t86 (new body)
    with BuildSketch(Plane(origin=(78.5772458658, 0, 36.0813856381), x_dir=(0, 1, 0), z_dir=(-0.9087719134, 0, -0.4172931935))):
        with BuildLine():
            ThreePointArc((0, -56.2267768991), (-1.8594090512, -54.3673678478), (-2.54, -51.8273678478))
            Line((-2.54, -51.8273678478), (-2.6416, -51.8273678478))
            Line((-2.6416, -51.8273678478), (-2.6416, -56.2267768991))
            Line((-2.6416, -56.2267768991), (-2.54, -56.3283768991))
            ThreePointArc((-2.54, -56.3283768991), (-1.27, -56.3283768991), (-0.0508, -56.3147650801))
            Line((-0.0508, -56.3147650801), (0, -56.2267768991))
        make_face()
    extrude(amount=F2_T86_DEPTH)

    # F2_s87 → F2_t88 (intersect, symmetric)
    with BuildSketch(Plane.XZ.offset(1.3)):
        with Locations((-24.3140361377, 44.5107013538)):
            Circle(F2_S87_R)
    extrude(amount=F2_T88_DEPTH, both=True, mode=Mode.INTERSECT)


with BuildPart() as f2_tool89:
    # F2_s90 → F2_t91 (revolve)
    with BuildSketch(Plane(origin=(0.2201689694, 0, 44.3890119894), x_dir=(0, 1, 0), z_dir=(-0.004959927, 0, -0.9999876995))):
        with BuildLine():
            ThreePointArc((0, -12.7504999131), (-1.8594090512, -14.6099089643), (-2.54, -17.1499089643))
            Line((-2.54, -17.1499089643), (-2.6416, -17.1499089643))
            Line((-2.6416, -17.1499089643), (-2.6416, -12.7504999131))
            Line((-2.6416, -12.7504999131), (-2.54, -12.6488999131))
            ThreePointArc((-2.54, -12.6488999131), (-1.27, -12.6488999131), (-0.0508, -12.6625117321))
            Line((-0.0508, -12.6625117321), (0, -12.7504999131))
        make_face()
    revolve(axis=Axis((-24.3140361377, -2.54, 44.5107013538), (0, -1, 0)), revolution_arc=F2_T91_ANGLE)

    split(bisect_by=Plane(origin=(14.9495959692, 0, 32.824108752), x_dir=(0, 1, 0), z_dir=(0.4144817437, 0, 0.9100576268)), keep=Keep.TOP)

    split(bisect_by=Plane(origin=(-23.4630512937, 0, 51.0973156286), x_dir=(0, 1, 0), z_dir=(0.4172931935, 0, -0.9087719134)), keep=Keep.TOP)


with BuildPart() as f2_tool84_1:
    add(f2_tool84.part)

    # F2_t94: intersect F2_tool89
    add(f2_tool89.part, mode=Mode.INTERSECT)


with BuildPart() as f1_10:
    add(f1_9.part)

    # F2_t82: cut F2_tool84
    add(f2_tool84_1.part, mode=Mode.SUBTRACT)


solid = f1_10.part
